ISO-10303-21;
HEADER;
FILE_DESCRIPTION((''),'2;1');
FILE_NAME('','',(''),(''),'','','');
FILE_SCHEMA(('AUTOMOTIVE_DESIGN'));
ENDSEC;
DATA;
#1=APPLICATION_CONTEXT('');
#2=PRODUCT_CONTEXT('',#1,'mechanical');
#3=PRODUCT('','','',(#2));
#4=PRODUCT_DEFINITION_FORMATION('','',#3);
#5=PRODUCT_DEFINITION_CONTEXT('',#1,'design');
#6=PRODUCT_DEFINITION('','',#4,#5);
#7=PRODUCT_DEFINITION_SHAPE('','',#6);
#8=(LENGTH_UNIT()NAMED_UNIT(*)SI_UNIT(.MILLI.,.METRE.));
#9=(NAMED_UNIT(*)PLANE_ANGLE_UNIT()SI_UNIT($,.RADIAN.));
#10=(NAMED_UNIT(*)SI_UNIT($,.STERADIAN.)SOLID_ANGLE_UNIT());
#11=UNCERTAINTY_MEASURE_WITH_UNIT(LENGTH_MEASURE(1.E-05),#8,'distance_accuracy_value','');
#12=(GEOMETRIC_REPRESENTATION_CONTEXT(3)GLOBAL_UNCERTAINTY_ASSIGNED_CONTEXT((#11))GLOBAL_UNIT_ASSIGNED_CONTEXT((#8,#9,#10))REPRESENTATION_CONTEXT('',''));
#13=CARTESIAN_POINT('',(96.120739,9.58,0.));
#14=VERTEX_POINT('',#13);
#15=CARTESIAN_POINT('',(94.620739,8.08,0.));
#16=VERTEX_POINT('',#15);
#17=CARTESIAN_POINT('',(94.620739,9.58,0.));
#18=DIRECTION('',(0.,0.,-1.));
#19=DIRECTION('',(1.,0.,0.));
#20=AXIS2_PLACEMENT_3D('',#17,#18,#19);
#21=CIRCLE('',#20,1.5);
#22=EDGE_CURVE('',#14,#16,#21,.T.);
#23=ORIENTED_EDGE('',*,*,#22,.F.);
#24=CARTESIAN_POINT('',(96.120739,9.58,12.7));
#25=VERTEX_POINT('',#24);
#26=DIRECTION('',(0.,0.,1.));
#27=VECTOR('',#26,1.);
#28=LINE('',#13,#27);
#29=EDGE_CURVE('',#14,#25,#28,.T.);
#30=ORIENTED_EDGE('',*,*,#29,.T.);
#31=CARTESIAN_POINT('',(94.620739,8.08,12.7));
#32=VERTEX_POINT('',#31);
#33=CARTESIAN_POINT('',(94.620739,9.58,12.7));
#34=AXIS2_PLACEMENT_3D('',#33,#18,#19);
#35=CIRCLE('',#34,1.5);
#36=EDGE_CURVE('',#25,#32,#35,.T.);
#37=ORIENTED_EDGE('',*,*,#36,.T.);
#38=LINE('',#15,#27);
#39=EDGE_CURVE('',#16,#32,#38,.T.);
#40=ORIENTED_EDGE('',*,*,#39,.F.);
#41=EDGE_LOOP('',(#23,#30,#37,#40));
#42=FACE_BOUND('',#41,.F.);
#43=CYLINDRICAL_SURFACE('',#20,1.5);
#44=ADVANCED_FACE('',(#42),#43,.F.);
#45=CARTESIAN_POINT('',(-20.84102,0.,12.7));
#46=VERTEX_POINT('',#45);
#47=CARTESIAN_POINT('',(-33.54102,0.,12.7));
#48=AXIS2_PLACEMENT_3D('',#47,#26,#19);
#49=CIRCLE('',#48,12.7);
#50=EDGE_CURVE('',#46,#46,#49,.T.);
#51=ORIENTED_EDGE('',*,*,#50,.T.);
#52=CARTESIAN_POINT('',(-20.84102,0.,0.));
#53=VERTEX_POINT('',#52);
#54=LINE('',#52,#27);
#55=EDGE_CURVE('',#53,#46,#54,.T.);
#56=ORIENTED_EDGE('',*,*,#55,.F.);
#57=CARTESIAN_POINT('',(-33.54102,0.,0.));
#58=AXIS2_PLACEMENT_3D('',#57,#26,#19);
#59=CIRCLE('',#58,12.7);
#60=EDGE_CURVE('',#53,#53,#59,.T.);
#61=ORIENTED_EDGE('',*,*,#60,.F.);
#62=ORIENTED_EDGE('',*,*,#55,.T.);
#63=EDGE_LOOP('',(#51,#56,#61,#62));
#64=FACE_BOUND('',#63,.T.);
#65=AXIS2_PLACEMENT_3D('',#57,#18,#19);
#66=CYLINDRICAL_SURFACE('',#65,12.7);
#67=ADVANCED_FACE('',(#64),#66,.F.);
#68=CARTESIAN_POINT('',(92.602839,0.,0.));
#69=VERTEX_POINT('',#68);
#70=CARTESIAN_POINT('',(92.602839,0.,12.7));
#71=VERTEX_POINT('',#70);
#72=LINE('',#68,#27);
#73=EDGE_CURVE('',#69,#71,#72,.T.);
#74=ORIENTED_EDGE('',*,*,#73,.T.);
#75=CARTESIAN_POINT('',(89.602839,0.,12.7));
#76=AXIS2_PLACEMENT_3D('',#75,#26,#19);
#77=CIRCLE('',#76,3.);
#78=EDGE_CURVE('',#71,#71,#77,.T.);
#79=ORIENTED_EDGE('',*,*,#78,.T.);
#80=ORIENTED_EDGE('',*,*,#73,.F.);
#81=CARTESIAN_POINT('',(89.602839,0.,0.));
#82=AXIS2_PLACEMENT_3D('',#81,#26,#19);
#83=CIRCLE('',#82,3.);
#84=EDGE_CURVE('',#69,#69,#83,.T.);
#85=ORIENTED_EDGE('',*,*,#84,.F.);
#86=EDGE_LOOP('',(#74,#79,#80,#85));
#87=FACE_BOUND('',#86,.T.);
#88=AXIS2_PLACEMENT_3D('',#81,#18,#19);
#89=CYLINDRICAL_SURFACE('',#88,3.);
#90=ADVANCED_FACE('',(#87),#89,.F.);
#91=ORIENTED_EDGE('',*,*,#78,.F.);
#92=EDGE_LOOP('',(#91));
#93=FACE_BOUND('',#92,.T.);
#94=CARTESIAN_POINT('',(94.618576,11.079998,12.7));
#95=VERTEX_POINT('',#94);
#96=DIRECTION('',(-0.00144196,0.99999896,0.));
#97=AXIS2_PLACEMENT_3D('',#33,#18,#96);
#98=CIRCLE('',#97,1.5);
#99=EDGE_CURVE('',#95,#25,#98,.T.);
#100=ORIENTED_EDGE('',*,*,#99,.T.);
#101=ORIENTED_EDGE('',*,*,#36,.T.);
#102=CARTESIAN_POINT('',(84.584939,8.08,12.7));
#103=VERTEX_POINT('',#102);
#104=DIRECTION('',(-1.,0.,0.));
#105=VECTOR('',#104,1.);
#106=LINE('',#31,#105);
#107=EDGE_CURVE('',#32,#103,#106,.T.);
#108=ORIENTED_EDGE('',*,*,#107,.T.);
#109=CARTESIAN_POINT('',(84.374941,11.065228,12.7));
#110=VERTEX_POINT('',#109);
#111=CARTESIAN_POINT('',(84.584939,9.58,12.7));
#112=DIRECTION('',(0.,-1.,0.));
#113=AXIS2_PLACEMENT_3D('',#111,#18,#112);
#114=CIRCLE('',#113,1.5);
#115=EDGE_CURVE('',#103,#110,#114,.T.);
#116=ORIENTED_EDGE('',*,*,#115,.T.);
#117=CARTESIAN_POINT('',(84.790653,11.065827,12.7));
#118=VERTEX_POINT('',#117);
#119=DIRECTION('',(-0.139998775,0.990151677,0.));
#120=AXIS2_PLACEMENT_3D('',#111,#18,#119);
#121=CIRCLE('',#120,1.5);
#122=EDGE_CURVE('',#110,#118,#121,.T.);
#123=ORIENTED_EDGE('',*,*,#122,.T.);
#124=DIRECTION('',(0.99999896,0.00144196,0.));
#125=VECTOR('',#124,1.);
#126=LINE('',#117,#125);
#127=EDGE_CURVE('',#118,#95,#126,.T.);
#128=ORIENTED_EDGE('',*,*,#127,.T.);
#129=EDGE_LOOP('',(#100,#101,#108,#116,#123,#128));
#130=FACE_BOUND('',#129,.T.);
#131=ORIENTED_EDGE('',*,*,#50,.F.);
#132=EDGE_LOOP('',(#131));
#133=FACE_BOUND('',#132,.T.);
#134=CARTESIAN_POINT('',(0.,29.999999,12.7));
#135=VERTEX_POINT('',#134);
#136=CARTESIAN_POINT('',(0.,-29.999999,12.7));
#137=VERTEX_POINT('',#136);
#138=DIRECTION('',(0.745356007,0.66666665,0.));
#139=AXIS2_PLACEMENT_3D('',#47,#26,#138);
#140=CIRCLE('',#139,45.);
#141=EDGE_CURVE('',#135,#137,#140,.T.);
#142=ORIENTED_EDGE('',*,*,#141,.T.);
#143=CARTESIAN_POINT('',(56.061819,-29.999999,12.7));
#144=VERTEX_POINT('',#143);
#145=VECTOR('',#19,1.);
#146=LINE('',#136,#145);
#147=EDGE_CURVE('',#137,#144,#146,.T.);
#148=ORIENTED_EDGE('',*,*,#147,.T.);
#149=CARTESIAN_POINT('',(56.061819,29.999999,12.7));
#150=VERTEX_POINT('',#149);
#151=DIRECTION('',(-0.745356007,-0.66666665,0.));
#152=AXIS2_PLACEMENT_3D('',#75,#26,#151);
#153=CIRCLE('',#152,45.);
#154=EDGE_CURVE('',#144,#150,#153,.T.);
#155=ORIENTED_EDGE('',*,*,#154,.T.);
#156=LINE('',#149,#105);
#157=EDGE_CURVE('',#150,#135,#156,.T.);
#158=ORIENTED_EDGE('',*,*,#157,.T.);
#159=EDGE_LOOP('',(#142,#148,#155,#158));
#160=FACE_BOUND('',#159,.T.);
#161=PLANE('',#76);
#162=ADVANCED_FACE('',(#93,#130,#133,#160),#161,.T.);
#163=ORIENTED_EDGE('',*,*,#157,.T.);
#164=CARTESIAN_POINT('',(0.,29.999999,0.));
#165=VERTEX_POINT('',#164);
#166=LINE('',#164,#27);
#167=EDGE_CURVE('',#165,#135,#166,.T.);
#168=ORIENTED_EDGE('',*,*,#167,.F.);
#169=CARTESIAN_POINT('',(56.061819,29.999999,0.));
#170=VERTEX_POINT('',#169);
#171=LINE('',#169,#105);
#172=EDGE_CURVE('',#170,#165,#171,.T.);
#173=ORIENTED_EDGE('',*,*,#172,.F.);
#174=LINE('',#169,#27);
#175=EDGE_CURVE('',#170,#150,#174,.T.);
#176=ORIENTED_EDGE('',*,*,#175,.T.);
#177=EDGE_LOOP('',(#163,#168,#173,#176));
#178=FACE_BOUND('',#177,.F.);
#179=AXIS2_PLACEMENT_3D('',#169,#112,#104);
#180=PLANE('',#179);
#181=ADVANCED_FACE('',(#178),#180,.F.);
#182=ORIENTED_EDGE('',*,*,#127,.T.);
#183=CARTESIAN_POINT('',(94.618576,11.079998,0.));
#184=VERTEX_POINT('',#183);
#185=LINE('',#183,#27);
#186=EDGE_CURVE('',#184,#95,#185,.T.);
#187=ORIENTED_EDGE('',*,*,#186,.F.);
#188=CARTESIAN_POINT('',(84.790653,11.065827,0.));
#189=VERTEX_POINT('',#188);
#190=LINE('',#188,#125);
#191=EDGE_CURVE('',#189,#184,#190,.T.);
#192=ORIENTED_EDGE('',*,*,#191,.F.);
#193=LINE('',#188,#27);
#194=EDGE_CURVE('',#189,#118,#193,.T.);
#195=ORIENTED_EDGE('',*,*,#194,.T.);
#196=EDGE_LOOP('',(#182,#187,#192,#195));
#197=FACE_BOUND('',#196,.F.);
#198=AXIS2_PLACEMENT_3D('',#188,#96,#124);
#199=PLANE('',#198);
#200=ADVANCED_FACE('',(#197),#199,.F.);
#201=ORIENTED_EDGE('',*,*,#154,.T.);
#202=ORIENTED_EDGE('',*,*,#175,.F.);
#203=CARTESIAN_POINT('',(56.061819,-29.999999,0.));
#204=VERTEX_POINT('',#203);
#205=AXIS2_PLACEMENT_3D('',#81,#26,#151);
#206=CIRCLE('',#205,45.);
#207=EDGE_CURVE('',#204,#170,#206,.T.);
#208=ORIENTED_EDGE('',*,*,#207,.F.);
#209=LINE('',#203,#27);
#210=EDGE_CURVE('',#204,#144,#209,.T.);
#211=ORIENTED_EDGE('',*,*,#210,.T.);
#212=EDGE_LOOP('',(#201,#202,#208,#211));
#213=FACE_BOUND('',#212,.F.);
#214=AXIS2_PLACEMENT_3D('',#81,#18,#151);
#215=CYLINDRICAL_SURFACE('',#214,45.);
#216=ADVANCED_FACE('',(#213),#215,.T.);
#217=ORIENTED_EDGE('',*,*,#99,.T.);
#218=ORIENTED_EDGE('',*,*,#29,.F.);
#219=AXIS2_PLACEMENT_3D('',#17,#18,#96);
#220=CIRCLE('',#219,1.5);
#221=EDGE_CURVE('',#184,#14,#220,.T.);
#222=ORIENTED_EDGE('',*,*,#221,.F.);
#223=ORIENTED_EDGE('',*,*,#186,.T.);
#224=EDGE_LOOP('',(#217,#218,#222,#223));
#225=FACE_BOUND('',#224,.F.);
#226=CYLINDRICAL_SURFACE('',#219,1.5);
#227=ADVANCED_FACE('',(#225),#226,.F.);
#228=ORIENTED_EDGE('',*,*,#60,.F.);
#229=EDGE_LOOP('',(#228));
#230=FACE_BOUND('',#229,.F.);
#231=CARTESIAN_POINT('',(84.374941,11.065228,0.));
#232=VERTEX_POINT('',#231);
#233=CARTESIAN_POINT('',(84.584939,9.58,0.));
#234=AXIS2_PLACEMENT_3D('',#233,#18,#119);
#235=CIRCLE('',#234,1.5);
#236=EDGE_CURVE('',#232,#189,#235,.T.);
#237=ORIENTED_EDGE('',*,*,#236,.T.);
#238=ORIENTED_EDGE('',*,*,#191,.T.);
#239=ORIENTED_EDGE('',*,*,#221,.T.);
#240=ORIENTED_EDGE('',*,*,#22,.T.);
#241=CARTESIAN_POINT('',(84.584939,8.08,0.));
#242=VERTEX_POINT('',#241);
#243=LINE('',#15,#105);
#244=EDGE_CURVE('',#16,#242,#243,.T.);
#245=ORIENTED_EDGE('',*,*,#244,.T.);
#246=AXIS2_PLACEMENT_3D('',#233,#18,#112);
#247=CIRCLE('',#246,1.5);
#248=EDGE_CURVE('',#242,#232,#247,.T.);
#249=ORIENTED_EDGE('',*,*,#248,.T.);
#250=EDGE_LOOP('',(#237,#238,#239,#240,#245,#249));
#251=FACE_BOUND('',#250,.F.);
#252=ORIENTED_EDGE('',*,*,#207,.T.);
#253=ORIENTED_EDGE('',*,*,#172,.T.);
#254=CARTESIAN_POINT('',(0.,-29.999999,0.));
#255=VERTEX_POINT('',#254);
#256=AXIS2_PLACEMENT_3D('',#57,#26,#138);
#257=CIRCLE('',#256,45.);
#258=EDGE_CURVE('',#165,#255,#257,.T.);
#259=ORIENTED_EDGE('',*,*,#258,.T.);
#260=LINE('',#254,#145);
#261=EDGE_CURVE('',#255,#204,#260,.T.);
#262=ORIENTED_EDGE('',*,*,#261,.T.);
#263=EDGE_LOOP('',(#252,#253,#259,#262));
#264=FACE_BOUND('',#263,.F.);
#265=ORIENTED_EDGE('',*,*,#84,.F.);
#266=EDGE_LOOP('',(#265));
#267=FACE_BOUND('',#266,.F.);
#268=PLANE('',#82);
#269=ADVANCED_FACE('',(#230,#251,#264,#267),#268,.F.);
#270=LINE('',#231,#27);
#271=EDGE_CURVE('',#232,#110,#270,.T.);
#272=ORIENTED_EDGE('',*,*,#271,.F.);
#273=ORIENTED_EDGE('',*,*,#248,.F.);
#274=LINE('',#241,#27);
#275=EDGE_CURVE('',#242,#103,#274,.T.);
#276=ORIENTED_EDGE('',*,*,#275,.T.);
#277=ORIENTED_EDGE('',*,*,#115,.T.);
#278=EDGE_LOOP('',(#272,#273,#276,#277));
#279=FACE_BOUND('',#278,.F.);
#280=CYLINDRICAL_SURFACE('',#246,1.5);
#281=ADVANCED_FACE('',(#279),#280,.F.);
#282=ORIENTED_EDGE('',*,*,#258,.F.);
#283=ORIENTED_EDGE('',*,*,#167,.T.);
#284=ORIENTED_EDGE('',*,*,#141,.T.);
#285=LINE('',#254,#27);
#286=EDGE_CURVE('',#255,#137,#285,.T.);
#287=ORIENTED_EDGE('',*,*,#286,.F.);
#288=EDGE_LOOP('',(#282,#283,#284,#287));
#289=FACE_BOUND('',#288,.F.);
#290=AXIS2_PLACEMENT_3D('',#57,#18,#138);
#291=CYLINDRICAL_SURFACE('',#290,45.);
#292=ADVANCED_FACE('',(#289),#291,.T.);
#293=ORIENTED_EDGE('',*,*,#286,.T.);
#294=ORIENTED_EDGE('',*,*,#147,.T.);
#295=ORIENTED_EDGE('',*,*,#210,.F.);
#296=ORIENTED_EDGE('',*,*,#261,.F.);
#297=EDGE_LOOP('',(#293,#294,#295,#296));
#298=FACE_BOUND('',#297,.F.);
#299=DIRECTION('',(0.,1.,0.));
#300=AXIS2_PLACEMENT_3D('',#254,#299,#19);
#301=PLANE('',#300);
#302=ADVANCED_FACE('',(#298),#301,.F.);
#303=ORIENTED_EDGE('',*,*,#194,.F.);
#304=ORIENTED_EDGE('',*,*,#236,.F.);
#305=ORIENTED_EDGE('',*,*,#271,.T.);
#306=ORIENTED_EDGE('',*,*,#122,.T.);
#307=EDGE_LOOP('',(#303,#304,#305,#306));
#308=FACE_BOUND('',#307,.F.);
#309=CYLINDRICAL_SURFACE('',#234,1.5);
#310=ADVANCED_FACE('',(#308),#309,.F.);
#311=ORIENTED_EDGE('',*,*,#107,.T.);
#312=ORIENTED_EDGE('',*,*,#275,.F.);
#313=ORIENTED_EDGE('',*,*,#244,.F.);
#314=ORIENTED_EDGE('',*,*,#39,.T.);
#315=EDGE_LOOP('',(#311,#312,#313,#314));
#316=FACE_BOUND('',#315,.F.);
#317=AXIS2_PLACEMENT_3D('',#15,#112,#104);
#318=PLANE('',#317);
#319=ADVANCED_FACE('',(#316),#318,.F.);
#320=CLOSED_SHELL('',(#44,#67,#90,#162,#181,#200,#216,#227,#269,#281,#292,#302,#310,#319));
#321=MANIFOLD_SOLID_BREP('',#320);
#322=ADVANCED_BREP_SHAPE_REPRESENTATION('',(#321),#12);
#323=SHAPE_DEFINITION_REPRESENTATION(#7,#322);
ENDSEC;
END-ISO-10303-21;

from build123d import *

# Parameters (mm, degrees)
F0_R     = 3
F0_R_2   = 12.7
F1_DEPTH = 12.7


# Not quite as in the source:
# - a feature names something its author has since deleted; it is built from what else it names


with BuildPart() as f1:
    # F0 (on Top) → F1 (new body)
    with BuildSketch(Plane.XY):
        with BuildLine():
            ThreePointArc((56.0618189529, -29.9999992666), (105.6598328516, -42.0377563289), (134.6028392714, 0))
            ThreePointArc((134.6028392714, 0), (105.6598328516, 42.0377563289), (56.0618189529, 29.9999992666))
            ThreePointArc((56.0618189529, 29.9999992666), (44.6028392714, 0), (56.0618189529, -29.9999992666))
        make_face()
        with Locations((89.6028392714, 0)):
            Circle(F0_R, mode=Mode.SUBTRACT)
        with BuildLine():
            ThreePointArc((84.5849392714, 8.08), (83.0886369502, 9.4747414442), (84.3749411096, 11.0652275152))
            ThreePointArc((84.3749411096, 11.0652275152), (84.5827763317, 11.0799984406), (84.7906532876, 11.0658269561))
            Line((84.7906532876, 11.0658269561), (94.6185763317, 11.0799984406))
            ThreePointArc((94.6185763317, 11.0799984406), (95.6806344526, 10.641424611), (96.1207392714, 9.58))
            ThreePointArc((96.1207392714, 9.58), (95.6813994432, 8.5193398282), (94.6207392714, 8.08))
            Line((94.6207392714, 8.08), (84.5849392714, 8.08))
        make_face(mode=Mode.SUBTRACT)
        with BuildLine():
            ThreePointArc((56.0618189529, -29.9999992666), (44.6028392714, 0), (56.0618189529, 29.9999992666))
            Line((56.0618189529, 29.9999992666), (0, 29.9999992666))
            ThreePointArc((0, 29.9999992666), (8.4967360104, 16.0569935802), (11.4589796815, 0))
            ThreePointArc((11.4589796815, 0), (8.4967360104, -16.0569935802), (0, -29.9999992666))
            Line((0, -29.9999992666), (56.0618189529, -29.9999992666))
        make_face()
        with BuildLine():
            ThreePointArc((11.4589796815, 0), (8.4967360104, 16.0569935802), (0, 29.9999992666))
            ThreePointArc((0, 29.9999992666), (-78.5410203185, 0), (0, -29.9999992666))
            ThreePointArc((0, -29.9999992666), (8.4967360104, -16.0569935802), (11.4589796815, 0))
        make_face()
        with Locations((-33.5410203185, 0)):
            Circle(F0_R_2, mode=Mode.SUBTRACT)
    extrude(amount=F1_DEPTH)


solid = f1.part
